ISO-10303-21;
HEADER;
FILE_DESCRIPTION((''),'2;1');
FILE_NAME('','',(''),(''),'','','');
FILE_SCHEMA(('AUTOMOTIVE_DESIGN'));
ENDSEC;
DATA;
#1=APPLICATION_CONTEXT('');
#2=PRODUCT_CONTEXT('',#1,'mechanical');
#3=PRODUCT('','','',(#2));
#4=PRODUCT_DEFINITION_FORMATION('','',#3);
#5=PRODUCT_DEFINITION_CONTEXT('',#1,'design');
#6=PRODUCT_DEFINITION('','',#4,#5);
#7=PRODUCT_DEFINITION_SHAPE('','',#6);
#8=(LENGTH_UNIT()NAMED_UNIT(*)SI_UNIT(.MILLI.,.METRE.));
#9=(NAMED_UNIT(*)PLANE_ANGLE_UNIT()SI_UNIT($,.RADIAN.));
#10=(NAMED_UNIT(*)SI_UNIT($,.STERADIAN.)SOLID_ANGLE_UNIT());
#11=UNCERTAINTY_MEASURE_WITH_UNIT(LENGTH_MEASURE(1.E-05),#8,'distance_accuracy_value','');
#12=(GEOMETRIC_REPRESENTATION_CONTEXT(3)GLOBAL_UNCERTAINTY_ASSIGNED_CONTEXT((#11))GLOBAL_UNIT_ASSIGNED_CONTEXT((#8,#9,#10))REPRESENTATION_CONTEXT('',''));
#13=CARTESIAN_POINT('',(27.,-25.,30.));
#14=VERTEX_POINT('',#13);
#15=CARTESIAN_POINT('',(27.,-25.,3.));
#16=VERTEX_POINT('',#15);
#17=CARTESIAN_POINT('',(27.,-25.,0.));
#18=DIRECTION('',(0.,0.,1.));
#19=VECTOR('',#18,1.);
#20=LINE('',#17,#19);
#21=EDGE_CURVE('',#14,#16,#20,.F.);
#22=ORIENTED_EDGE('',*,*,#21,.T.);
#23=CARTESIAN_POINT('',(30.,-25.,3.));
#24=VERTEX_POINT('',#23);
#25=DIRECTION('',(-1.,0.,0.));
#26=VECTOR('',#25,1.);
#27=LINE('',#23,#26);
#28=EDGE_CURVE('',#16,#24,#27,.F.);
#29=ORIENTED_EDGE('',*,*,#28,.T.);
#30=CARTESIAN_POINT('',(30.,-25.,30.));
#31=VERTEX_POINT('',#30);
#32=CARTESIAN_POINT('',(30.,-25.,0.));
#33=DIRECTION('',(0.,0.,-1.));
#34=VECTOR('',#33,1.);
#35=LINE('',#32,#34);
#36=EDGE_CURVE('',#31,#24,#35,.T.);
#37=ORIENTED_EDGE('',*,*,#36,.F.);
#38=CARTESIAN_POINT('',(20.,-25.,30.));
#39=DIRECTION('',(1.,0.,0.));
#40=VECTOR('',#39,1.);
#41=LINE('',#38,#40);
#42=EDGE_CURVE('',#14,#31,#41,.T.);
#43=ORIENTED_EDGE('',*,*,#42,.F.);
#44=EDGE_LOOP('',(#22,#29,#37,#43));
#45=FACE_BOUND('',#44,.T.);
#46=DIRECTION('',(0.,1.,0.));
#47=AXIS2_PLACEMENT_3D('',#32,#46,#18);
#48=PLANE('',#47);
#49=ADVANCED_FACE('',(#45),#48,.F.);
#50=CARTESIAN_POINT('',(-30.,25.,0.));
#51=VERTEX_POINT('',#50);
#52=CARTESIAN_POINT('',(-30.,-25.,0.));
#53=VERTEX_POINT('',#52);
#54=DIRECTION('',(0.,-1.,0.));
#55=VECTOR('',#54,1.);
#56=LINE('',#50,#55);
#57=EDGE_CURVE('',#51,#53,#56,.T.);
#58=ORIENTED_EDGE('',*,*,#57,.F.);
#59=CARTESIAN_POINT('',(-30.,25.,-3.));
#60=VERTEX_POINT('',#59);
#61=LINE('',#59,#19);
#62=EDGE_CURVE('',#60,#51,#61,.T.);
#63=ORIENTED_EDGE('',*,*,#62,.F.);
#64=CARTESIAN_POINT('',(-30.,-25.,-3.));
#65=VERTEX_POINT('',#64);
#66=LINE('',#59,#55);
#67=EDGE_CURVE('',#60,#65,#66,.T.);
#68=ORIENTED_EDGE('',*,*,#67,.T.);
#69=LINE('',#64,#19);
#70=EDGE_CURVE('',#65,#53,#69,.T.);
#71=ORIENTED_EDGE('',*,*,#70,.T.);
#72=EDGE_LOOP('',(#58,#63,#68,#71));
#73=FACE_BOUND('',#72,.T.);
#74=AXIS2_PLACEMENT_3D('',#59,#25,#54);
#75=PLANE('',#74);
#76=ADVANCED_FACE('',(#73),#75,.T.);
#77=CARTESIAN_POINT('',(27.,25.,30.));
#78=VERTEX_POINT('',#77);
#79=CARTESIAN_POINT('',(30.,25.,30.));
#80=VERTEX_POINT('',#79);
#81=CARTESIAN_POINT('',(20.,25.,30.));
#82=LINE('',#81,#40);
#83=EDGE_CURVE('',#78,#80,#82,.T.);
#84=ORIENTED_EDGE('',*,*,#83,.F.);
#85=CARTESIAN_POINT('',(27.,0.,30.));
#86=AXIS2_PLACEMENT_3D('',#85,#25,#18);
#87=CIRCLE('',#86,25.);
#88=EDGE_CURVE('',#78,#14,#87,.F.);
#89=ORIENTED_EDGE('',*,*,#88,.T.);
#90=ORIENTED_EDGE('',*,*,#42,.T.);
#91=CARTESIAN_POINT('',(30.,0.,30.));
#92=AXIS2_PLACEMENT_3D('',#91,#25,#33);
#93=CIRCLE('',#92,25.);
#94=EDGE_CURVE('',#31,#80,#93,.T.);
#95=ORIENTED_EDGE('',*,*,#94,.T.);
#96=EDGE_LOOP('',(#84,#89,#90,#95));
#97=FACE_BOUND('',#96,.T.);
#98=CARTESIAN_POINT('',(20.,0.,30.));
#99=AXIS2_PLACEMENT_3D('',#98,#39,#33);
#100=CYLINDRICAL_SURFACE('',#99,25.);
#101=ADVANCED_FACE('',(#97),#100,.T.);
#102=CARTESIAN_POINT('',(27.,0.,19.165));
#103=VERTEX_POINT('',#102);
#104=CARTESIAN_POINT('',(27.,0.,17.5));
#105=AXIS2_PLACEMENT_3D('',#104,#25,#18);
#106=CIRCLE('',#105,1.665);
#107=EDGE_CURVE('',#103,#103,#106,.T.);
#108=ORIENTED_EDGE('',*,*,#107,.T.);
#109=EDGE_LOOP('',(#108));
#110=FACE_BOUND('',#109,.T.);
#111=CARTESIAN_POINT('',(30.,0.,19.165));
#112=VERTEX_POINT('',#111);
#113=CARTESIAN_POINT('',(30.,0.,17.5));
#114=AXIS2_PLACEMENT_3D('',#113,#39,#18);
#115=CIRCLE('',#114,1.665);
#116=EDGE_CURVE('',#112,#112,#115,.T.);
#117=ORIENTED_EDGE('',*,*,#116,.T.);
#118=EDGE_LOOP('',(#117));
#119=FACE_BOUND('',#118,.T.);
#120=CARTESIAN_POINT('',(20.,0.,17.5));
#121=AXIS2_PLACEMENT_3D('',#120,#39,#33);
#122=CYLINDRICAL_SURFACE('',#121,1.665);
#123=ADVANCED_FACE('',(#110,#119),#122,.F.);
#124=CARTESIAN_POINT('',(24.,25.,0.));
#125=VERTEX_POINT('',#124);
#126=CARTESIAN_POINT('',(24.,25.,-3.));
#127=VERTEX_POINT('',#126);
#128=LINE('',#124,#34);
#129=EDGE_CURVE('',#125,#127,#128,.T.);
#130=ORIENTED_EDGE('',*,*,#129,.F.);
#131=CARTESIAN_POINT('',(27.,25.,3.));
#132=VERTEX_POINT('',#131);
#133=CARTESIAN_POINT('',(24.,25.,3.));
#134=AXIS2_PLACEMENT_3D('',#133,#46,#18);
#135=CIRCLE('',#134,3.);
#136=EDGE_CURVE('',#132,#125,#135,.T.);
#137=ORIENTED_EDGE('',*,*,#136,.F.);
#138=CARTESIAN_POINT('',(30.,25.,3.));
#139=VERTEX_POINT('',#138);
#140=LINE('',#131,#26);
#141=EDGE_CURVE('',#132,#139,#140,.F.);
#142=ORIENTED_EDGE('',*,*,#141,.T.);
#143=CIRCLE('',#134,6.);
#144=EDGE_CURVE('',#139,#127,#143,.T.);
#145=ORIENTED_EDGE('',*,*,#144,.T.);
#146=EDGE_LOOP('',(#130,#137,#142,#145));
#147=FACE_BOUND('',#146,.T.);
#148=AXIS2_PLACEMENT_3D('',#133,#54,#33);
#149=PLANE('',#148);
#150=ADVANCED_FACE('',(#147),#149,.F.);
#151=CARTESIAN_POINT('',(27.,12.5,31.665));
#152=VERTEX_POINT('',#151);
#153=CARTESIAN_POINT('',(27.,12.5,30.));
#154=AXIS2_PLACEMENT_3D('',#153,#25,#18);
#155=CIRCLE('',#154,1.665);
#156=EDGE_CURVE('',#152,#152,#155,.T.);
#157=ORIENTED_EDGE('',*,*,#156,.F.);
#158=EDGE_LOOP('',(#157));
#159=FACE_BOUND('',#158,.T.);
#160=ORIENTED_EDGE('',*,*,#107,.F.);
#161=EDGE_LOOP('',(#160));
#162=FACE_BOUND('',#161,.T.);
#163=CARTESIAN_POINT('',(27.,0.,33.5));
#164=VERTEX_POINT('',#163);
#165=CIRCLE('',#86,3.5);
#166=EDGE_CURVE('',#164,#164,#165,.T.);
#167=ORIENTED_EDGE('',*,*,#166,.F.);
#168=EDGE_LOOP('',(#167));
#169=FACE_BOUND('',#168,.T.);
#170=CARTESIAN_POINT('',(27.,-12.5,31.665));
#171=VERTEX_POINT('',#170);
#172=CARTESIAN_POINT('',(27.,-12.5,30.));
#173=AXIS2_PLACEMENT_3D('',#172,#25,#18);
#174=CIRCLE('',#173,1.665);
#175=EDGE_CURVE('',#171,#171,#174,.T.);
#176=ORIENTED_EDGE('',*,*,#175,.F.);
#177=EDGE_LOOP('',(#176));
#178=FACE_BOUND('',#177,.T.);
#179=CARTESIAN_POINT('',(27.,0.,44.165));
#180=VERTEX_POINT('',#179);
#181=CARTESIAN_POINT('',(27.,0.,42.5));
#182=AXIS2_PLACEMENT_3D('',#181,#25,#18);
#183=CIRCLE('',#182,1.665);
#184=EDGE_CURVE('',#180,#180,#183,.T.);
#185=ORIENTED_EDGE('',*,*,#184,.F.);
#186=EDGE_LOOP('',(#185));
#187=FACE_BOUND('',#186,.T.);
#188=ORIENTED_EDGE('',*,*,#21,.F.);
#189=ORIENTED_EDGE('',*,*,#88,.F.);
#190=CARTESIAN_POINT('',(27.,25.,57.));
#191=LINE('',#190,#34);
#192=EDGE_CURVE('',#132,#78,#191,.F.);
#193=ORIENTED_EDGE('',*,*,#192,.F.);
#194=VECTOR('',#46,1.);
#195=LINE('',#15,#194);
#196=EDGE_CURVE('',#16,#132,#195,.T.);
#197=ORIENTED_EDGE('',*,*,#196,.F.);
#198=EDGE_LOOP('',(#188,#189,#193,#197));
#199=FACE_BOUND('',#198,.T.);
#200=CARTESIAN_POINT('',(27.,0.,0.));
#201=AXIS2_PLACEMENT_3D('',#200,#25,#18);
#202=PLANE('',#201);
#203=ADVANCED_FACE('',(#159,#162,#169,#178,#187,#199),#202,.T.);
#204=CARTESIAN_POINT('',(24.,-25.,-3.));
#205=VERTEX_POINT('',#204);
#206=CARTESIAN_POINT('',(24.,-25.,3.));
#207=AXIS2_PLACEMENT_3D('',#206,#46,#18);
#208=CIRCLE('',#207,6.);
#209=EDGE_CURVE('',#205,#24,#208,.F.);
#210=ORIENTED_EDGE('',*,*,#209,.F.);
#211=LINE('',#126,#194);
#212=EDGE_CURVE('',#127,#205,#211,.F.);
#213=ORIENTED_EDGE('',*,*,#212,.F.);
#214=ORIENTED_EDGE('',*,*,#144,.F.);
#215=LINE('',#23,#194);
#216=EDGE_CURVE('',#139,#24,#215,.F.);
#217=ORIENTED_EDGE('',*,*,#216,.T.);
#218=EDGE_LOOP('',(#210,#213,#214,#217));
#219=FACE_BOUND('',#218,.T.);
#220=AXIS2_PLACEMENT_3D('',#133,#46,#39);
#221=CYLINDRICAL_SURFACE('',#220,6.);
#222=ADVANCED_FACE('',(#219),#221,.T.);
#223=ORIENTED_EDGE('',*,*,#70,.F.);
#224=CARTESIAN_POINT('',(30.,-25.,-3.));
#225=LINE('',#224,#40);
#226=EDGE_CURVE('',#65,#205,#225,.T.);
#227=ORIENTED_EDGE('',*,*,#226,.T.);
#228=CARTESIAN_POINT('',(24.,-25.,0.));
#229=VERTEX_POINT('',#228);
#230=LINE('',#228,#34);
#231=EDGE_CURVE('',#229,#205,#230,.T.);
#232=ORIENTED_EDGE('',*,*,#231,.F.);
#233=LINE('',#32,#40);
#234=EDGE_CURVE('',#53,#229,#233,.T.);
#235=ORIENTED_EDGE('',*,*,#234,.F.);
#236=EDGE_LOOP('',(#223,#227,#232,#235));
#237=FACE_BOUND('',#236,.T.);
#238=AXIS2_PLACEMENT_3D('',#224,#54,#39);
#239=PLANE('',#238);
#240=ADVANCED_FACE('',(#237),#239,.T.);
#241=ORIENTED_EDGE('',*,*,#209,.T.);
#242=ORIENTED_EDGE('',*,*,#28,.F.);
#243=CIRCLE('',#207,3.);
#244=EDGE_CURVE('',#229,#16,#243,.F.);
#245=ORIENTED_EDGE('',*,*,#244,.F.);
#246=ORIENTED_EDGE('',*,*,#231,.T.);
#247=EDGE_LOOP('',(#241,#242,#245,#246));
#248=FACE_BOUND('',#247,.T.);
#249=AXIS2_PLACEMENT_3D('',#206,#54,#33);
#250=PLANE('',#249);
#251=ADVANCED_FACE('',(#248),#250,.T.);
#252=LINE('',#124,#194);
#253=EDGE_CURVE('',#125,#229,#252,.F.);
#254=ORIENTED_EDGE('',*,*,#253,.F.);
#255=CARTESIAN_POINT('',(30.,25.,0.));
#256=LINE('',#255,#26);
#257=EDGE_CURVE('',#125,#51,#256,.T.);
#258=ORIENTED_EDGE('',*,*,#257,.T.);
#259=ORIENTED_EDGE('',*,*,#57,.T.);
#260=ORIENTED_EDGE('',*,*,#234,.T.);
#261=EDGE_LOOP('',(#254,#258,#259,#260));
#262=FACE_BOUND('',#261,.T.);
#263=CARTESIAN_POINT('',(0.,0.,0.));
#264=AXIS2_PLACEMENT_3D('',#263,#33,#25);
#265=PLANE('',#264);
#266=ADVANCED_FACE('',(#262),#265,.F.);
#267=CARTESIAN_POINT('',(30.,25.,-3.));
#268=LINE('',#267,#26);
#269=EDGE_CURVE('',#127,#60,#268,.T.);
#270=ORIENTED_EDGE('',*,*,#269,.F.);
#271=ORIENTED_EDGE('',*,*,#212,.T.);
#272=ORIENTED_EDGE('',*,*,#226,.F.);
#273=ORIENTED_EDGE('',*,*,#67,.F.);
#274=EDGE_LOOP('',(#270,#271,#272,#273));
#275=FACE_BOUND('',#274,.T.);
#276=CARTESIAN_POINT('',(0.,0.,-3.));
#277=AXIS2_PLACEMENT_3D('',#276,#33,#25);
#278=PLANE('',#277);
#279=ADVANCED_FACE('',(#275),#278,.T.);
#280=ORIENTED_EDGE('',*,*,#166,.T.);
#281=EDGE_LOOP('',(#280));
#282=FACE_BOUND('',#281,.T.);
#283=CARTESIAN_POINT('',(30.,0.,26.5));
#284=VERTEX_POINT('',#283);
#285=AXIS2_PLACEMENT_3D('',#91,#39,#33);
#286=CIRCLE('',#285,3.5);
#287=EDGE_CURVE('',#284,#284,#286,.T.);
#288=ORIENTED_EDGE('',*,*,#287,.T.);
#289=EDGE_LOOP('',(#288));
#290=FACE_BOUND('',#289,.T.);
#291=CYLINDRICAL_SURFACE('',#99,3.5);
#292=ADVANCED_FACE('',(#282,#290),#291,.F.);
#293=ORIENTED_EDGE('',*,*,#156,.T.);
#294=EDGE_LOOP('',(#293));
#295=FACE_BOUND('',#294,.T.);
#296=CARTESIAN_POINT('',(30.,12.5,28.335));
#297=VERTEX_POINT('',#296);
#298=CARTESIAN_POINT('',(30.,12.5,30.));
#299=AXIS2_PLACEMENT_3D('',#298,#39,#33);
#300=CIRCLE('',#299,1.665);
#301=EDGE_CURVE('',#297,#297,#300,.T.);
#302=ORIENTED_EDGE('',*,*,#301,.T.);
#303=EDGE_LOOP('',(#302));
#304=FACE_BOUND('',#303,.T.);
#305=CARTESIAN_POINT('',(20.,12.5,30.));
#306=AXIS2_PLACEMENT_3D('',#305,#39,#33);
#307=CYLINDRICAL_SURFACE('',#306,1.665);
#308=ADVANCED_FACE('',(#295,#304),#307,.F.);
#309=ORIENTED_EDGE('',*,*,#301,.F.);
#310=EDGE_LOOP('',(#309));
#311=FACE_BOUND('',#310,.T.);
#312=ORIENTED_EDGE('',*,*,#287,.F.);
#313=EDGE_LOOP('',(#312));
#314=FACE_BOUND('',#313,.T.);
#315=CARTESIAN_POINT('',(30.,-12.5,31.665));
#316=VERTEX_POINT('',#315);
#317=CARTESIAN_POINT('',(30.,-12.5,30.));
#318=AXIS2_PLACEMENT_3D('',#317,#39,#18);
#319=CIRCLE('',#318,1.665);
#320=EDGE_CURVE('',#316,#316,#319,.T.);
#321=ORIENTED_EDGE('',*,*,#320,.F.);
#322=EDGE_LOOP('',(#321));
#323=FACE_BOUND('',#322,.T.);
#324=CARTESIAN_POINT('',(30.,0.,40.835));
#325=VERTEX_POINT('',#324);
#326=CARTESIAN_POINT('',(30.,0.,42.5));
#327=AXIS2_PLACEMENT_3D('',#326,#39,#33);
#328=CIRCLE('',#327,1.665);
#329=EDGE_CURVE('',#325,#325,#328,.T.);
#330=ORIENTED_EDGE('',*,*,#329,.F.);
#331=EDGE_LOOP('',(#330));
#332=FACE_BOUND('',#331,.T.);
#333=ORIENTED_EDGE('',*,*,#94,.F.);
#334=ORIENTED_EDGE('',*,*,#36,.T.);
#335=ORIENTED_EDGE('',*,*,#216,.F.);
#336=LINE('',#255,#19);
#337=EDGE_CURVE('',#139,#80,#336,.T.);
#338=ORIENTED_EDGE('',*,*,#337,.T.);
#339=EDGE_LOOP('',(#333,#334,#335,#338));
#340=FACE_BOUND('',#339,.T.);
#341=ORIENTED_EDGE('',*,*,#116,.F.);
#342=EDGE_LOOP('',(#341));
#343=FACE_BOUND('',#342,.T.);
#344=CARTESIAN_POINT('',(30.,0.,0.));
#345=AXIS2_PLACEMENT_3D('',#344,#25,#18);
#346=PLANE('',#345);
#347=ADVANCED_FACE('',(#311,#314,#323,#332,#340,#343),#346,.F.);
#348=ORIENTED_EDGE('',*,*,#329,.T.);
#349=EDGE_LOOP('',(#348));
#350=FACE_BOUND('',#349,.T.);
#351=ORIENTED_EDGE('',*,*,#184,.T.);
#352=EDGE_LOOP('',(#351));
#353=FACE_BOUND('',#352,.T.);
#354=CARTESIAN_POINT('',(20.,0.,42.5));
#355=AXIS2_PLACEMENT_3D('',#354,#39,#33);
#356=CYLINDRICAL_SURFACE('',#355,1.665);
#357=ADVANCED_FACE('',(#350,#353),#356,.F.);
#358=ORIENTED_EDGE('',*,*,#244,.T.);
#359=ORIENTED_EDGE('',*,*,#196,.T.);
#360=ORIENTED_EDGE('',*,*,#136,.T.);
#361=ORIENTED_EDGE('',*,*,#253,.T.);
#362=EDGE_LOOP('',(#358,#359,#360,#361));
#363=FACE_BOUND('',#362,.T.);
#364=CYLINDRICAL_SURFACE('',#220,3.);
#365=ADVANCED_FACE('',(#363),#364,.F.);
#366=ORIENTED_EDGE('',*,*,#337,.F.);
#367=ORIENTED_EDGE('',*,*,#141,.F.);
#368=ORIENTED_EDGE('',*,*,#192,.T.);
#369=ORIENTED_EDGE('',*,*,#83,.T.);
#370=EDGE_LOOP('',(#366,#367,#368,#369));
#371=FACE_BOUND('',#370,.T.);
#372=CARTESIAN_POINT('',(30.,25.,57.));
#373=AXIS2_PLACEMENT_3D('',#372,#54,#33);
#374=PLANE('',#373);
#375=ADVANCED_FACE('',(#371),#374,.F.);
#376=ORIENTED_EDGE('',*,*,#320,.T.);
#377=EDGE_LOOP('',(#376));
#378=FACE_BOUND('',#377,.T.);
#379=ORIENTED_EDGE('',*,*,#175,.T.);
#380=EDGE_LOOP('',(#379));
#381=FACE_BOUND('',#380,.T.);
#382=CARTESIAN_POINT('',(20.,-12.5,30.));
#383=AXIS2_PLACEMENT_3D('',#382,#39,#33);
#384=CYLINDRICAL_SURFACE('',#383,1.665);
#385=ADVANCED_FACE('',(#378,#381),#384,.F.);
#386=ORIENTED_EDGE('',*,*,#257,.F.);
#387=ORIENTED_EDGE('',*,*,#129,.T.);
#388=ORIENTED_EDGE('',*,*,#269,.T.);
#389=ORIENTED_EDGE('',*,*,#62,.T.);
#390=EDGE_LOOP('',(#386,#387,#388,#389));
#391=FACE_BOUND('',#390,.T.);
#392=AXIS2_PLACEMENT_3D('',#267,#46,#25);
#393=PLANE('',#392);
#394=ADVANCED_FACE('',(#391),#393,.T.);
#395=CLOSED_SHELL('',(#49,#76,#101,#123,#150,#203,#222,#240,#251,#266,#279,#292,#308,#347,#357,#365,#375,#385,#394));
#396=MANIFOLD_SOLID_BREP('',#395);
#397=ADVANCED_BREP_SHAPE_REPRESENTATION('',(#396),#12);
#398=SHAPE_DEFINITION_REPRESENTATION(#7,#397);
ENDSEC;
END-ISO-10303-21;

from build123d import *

# Parameters (mm, degrees)
SKETCH1_W                    = 60
SKETCH1_H                    = 50
BASE_FLANGE1_DEPTH           = 3
EDGE_FLANGE1_STRIP_W         = 18
EDGE_FLANGE1_STRIP_H         = 3
EDGE_FLANGE1_STRIP_CUT_DEPTH = 50
EDGE_FLANGE1_DEPTH           = 50
CUT_EXTRUDE1_DEPTH           = 10
SKETCH10_R                   = 3.5
SKETCH10_R_2                 = 1.665
CUT_EXTRUDE2_DEPTH           = 10


# Sheet-metal steps are written as plain solids
with BuildPart() as part:
    # Sketch1 → Base-Flange1 (new body)
    with BuildSketch(Plane.XY):
        Rectangle(SKETCH1_W, SKETCH1_H)
    extrude(amount=-BASE_FLANGE1_DEPTH)

    # Edge-Flange1 strip (across the edge) → Edge-Flange1 strip cut (cut)
    with BuildSketch(Plane(origin=(30, -25, 0), x_dir=(-1, 0, 0), z_dir=(0, 1, 0))):
        with Locations((-3, -1.5)):
            Rectangle(EDGE_FLANGE1_STRIP_W, EDGE_FLANGE1_STRIP_H)
    extrude(amount=EDGE_FLANGE1_STRIP_CUT_DEPTH, mode=Mode.SUBTRACT)

    # Edge-Flange1 section (across the edge) → Edge-Flange1 (add)
    with BuildSketch(Plane(origin=(30, -25, 0), x_dir=(-1, 0, 0), z_dir=(0, 1, 0))):
        with BuildLine():
            Line((0, 3), (0, 57))
            Line((0, 57), (3, 57))
            Line((3, 57), (3, 3))
            ThreePointArc((3, 3), (3.878679656, 0.878679656), (6, 0))
            Line((6, 0), (6, -3))
            ThreePointArc((6, -3), (1.757359313, -1.242640687), (0, 3))
        make_face()
    extrude(amount=EDGE_FLANGE1_DEPTH)

    # Sketch9 → Cut-Extrude1 (cut)
    with BuildSketch(Plane(origin=(30, 0, 0), x_dir=(0, 0, -1), z_dir=(1, 0, 0))):
        with BuildLine():
            Line((-30, 25), (-57, 25))
            Line((-57, 25), (-57, -25))
            Line((-57, -25), (-30, -25))
            ThreePointArc((-30, -25), (-55, 0), (-30, 25))
        make_face()
    extrude(amount=-CUT_EXTRUDE1_DEPTH, mode=Mode.SUBTRACT)

    # Sketch10 → Cut-Extrude2 (cut)
    with BuildSketch(Plane(origin=(30, 0, 0), x_dir=(0, 0, -1), z_dir=(1, 0, 0))):
        with Locations((-30, 0)):
            Circle(SKETCH10_R)
        with Locations((-30, 12.5)):
            Circle(SKETCH10_R_2)
        with Locations((-42.5, 0)):
            Circle(SKETCH10_R_2)
        with Locations(Location((-30, -12.5, 0), (0, 0, 180))):
            Circle(SKETCH10_R_2)
        with Locations(Location((-17.5, 0, 0), (0, 0, 180))):
            Circle(SKETCH10_R_2)
    extrude(amount=-CUT_EXTRUDE2_DEPTH, mode=Mode.SUBTRACT)


solid = part.part
